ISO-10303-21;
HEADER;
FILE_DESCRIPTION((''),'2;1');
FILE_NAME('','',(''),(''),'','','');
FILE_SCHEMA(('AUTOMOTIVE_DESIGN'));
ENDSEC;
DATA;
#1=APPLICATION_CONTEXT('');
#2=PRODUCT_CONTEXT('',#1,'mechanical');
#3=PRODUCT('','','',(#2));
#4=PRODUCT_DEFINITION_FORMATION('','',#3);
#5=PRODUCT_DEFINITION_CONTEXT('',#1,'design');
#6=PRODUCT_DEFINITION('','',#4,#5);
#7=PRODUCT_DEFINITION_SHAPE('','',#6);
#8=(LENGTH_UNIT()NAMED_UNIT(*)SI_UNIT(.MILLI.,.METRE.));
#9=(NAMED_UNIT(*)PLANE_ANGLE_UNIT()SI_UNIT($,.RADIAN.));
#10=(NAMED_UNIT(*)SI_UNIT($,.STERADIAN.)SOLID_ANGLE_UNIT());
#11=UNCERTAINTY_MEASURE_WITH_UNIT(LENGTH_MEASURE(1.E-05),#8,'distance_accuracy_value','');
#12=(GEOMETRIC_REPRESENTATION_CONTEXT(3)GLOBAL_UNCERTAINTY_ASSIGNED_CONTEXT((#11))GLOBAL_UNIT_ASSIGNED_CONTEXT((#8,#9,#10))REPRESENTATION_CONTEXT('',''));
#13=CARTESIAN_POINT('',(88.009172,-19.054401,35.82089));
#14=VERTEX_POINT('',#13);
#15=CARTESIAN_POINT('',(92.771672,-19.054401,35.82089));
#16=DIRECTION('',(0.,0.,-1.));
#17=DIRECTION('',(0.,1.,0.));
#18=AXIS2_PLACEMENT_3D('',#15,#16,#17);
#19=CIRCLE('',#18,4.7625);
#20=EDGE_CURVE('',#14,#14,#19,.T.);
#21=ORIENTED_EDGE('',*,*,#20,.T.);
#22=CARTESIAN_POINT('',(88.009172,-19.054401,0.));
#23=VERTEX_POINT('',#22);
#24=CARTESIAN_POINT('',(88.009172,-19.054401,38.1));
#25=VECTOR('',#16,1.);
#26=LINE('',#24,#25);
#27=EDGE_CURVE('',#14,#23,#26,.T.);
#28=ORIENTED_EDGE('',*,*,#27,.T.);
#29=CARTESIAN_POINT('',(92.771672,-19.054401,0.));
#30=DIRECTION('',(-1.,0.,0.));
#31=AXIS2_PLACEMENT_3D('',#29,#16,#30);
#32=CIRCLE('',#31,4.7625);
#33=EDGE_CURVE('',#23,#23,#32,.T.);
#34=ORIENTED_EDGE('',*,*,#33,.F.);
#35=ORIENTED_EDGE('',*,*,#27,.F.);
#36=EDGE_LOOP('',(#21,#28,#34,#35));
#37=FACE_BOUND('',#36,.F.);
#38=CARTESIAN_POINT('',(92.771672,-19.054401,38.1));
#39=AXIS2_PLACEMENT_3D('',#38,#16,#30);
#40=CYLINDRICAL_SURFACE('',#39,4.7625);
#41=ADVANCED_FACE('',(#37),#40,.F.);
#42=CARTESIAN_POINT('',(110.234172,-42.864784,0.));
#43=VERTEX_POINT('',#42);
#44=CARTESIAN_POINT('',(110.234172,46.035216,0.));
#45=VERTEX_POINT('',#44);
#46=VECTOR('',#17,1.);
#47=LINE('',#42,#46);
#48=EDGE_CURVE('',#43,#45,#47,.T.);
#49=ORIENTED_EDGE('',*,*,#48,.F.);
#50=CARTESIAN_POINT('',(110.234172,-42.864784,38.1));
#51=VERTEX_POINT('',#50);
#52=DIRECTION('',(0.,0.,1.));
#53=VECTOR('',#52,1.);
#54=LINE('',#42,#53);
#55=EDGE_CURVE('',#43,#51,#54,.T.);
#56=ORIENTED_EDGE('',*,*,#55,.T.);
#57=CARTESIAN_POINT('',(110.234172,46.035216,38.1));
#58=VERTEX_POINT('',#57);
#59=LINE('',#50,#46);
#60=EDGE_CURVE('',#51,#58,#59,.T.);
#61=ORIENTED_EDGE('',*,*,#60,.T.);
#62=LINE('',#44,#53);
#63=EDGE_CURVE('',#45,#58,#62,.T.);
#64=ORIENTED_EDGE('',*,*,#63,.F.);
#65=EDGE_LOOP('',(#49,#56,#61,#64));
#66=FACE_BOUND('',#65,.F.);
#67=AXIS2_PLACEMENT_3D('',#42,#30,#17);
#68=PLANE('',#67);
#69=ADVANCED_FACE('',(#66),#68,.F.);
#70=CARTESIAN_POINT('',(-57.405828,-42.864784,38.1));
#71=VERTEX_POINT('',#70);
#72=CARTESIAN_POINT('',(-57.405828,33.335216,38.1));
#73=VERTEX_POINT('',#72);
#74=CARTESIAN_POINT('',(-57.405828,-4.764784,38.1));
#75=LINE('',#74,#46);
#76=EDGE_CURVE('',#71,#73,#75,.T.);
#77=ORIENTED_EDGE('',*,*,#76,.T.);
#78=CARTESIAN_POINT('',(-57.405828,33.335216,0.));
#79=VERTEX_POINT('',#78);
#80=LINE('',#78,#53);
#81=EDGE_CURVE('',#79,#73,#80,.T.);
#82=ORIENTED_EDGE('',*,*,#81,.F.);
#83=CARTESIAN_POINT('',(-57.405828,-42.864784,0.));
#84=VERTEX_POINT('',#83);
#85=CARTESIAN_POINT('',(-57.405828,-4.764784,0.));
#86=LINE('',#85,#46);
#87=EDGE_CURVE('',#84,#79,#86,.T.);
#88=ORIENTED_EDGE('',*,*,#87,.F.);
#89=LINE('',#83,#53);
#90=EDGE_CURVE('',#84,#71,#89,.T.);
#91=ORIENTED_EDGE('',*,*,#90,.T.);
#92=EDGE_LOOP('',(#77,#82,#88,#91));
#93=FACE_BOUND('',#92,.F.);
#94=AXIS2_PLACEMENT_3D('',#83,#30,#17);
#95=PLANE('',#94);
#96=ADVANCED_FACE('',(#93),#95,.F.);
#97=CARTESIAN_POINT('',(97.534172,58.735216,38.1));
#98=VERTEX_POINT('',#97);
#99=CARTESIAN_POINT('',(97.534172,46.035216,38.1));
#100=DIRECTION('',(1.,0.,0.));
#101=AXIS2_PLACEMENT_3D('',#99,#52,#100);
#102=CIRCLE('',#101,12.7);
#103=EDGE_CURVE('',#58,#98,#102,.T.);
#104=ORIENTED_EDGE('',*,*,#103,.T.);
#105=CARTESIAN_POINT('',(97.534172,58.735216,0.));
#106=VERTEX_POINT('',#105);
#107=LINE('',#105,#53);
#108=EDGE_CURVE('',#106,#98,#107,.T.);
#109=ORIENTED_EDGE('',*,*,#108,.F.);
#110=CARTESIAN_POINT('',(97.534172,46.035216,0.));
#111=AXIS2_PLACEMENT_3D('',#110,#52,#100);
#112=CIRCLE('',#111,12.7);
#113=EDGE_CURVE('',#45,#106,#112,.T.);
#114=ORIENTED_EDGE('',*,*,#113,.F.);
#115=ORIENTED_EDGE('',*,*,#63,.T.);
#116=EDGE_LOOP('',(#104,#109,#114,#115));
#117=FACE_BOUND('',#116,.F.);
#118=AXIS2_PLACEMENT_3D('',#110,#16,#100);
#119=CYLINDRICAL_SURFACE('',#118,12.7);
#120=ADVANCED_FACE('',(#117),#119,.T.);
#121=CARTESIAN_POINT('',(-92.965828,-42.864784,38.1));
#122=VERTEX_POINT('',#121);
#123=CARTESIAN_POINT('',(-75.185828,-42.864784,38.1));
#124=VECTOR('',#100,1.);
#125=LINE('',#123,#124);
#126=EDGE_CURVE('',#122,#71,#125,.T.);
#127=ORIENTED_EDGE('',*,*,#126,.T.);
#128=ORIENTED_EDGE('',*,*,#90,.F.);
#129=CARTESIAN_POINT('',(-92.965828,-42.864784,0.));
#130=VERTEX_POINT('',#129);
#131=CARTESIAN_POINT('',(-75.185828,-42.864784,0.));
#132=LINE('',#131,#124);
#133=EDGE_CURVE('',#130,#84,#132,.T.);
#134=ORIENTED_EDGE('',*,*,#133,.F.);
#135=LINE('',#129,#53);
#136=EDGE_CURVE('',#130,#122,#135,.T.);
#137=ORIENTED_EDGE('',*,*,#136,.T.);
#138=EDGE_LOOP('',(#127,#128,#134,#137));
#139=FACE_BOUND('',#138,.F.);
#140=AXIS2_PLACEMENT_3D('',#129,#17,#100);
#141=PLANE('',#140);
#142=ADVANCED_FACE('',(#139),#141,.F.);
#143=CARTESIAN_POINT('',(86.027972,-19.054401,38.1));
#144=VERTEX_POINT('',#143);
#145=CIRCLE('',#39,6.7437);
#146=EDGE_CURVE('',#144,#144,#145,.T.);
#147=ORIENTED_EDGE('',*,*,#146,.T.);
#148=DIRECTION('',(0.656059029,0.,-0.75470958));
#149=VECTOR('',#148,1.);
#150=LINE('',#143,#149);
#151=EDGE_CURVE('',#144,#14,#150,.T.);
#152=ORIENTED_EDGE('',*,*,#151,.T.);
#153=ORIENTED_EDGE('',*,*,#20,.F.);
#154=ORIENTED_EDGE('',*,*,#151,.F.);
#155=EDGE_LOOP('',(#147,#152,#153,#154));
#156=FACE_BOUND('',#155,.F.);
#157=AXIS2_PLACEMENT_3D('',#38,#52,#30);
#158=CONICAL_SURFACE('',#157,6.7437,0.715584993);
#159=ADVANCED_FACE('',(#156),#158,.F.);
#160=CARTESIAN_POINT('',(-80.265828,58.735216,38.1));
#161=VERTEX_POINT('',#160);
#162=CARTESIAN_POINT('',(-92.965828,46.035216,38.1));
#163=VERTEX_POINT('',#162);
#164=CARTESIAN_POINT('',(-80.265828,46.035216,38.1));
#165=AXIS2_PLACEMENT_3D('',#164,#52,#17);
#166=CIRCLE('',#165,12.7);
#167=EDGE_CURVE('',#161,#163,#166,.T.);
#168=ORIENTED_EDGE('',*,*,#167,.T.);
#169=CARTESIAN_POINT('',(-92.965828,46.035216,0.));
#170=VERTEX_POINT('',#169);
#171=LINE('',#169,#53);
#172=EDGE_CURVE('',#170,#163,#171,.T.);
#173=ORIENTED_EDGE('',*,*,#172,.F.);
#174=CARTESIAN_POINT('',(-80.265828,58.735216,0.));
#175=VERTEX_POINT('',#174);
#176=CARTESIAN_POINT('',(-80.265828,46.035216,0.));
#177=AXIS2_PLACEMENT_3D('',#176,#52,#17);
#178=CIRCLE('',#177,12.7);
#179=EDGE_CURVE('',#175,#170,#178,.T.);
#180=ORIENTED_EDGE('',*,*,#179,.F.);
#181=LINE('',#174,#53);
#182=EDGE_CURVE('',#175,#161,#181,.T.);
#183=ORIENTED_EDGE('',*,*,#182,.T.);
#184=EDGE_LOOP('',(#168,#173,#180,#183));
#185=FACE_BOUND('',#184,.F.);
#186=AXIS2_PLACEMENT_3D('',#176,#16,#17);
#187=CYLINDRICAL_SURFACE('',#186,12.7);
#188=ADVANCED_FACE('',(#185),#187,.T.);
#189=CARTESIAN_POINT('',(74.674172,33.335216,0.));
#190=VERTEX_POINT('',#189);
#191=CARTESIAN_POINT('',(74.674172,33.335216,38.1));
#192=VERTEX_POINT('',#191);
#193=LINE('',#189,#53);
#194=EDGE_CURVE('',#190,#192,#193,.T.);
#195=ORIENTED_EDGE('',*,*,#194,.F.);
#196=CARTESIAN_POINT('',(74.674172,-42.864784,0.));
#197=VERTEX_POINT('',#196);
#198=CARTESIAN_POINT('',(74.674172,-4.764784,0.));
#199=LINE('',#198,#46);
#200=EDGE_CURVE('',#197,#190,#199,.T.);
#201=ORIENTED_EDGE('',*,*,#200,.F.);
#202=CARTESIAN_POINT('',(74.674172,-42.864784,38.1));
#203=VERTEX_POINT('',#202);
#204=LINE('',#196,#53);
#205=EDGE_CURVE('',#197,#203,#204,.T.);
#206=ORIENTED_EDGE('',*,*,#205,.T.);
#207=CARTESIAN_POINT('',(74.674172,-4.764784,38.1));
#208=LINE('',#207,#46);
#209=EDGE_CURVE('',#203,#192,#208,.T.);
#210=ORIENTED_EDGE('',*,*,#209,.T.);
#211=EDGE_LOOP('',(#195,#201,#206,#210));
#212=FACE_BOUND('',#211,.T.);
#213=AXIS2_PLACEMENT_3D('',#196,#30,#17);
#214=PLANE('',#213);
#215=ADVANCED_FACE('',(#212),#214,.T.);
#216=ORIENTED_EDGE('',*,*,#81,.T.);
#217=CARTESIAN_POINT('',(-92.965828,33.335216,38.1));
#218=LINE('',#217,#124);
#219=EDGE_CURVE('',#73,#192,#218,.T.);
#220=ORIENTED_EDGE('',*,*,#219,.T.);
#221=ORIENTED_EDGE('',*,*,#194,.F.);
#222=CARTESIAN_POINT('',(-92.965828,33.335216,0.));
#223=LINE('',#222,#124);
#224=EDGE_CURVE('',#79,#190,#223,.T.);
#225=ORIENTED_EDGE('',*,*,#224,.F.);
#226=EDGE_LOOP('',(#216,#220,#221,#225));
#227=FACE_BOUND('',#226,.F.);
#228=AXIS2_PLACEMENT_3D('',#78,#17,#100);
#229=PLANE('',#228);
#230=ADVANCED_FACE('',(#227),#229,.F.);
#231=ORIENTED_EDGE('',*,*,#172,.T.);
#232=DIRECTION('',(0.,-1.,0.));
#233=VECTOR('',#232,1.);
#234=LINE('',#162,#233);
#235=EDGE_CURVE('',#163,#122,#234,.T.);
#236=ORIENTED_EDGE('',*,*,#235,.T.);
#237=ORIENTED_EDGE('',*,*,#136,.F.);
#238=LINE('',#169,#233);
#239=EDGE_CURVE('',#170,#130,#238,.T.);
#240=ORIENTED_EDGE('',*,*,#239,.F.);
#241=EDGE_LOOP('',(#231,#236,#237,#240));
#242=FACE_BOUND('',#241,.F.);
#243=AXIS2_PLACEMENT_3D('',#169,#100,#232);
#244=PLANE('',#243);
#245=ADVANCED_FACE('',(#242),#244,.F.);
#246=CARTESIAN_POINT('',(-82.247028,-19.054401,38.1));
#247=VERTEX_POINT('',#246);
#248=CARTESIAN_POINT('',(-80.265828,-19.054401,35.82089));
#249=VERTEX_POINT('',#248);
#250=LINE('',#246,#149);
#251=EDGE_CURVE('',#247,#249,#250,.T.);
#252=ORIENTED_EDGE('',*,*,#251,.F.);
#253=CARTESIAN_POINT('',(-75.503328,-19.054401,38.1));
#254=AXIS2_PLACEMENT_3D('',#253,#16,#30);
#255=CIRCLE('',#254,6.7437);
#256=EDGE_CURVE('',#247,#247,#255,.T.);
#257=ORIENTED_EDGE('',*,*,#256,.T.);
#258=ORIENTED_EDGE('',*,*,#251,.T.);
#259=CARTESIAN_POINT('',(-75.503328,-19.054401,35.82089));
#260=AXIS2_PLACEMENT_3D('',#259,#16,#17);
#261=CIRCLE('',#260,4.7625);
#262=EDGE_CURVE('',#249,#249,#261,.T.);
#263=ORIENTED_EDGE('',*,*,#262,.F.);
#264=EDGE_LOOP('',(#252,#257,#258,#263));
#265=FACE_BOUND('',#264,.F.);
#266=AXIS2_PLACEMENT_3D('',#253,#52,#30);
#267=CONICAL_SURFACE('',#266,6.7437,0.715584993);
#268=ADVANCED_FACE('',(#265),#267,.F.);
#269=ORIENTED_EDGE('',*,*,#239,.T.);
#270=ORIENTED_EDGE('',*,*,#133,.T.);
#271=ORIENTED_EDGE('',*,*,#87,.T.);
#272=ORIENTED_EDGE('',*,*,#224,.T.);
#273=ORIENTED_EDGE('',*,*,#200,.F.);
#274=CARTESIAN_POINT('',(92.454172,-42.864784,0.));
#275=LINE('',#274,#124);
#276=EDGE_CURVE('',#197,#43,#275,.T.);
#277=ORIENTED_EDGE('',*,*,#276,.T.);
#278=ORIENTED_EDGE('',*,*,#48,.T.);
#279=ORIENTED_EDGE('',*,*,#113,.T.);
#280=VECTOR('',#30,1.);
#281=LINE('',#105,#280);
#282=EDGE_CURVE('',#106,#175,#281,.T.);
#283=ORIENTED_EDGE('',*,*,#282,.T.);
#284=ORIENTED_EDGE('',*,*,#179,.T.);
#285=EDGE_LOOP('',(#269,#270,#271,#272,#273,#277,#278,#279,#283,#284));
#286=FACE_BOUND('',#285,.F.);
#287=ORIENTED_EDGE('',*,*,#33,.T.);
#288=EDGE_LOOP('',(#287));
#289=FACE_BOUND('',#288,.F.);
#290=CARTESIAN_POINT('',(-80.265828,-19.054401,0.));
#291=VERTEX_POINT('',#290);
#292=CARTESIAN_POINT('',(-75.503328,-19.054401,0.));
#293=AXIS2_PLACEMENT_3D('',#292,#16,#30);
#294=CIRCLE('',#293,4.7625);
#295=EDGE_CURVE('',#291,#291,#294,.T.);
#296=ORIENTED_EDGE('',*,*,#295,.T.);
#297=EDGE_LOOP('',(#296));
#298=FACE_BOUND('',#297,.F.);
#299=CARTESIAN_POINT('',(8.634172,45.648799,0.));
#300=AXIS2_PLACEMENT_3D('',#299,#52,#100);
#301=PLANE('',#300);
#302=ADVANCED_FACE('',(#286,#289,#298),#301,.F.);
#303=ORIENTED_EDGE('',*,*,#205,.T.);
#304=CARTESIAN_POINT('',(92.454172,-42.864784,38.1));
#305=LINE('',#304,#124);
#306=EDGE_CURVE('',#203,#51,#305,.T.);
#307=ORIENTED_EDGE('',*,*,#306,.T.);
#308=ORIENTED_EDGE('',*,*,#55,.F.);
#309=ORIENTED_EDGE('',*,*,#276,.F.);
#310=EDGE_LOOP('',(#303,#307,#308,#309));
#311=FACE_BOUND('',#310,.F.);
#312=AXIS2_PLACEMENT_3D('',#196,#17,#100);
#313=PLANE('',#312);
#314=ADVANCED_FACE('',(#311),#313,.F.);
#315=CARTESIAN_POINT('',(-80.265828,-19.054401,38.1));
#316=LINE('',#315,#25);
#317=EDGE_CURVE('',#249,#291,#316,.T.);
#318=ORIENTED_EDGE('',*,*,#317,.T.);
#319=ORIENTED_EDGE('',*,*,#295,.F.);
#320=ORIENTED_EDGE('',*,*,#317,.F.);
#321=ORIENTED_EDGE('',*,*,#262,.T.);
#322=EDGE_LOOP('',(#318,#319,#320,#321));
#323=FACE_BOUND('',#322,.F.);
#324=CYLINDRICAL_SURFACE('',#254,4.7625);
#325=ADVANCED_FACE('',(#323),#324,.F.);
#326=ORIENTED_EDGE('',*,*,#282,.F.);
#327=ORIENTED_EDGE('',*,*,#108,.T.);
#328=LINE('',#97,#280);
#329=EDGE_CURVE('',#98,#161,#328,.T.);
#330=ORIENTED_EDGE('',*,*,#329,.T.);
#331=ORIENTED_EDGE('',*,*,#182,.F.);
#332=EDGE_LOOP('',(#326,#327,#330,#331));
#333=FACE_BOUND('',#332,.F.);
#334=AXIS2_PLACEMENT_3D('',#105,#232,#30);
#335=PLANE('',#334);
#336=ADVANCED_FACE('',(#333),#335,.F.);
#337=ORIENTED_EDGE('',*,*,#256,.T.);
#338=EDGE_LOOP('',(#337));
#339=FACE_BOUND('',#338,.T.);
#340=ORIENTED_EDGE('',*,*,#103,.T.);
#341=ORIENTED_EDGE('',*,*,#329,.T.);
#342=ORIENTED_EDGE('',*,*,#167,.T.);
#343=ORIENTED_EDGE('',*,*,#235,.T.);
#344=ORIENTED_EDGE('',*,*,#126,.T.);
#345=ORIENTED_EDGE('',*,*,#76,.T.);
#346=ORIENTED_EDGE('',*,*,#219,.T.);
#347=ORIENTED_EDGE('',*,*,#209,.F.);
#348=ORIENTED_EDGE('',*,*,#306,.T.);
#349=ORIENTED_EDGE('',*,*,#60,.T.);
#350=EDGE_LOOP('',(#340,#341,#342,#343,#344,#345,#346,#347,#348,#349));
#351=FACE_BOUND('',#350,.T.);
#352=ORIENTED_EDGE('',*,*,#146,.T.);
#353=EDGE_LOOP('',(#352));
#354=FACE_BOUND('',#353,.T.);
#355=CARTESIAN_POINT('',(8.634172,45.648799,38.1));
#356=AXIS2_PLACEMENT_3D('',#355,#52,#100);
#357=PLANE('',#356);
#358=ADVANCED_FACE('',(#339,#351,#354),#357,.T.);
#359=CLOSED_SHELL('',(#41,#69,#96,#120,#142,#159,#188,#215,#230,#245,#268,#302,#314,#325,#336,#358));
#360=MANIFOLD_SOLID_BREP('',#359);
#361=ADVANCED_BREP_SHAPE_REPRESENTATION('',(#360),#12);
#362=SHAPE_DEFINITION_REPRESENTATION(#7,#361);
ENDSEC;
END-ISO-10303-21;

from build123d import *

# Parameters (mm, degrees)
F0_W           = 35.56
F0_H           = 76.2
F1_DEPTH       = 38.1
F3_D           = 9.525
F3_CSINK_D     = 13.4874
F3_CSINK_ANGLE = 82


# Not quite as in the source:
# - a length typed as a fraction of an inch, garbled in the dataset ("3 / 203.2 mm" for 3/8 in), is restored


with BuildPart() as f1:
    # F0 (on Top) → F1 (new body)
    with BuildSketch(Plane.XY):
        with BuildLine():
            Line((97.53417238, 58.7352159441), (-80.26582762, 58.7352159441))
            ThreePointArc((-80.26582762, 58.7352159441), (-89.2460837411, 55.0154720651), (-92.96582762, 46.0352159441))
            Line((-92.96582762, 46.0352159441), (-92.96582762, 33.3352159441))
            Line((-92.96582762, 33.3352159441), (-57.40582762, 33.3352159441))
            Line((-57.40582762, 33.3352159441), (74.67417238, 33.3352159441))
            Line((74.67417238, 33.3352159441), (110.23417238, 33.3352159441))
            Line((110.23417238, 33.3352159441), (110.23417238, 46.0352159441))
            ThreePointArc((110.23417238, 46.0352159441), (106.514428501, 55.0154720651), (97.53417238, 58.7352159441))
        make_face()
        with Locations((-75.18582762, -4.7647840559)):
            Rectangle(F0_W, F0_H)
        with Locations((92.45417238, -4.7647840559)):
            Rectangle(F0_W, F0_H)
    extrude(amount=F1_DEPTH)

    # F3 (through all)
    with Locations(Plane.XY.offset(38.1)):
        with Locations((-75.50332762, -19.0544008167), (92.77167238, -19.0544008167)):
            CounterSinkHole(F3_D / 2, F3_CSINK_D / 2, counter_sink_angle=F3_CSINK_ANGLE)


solid = f1.part
